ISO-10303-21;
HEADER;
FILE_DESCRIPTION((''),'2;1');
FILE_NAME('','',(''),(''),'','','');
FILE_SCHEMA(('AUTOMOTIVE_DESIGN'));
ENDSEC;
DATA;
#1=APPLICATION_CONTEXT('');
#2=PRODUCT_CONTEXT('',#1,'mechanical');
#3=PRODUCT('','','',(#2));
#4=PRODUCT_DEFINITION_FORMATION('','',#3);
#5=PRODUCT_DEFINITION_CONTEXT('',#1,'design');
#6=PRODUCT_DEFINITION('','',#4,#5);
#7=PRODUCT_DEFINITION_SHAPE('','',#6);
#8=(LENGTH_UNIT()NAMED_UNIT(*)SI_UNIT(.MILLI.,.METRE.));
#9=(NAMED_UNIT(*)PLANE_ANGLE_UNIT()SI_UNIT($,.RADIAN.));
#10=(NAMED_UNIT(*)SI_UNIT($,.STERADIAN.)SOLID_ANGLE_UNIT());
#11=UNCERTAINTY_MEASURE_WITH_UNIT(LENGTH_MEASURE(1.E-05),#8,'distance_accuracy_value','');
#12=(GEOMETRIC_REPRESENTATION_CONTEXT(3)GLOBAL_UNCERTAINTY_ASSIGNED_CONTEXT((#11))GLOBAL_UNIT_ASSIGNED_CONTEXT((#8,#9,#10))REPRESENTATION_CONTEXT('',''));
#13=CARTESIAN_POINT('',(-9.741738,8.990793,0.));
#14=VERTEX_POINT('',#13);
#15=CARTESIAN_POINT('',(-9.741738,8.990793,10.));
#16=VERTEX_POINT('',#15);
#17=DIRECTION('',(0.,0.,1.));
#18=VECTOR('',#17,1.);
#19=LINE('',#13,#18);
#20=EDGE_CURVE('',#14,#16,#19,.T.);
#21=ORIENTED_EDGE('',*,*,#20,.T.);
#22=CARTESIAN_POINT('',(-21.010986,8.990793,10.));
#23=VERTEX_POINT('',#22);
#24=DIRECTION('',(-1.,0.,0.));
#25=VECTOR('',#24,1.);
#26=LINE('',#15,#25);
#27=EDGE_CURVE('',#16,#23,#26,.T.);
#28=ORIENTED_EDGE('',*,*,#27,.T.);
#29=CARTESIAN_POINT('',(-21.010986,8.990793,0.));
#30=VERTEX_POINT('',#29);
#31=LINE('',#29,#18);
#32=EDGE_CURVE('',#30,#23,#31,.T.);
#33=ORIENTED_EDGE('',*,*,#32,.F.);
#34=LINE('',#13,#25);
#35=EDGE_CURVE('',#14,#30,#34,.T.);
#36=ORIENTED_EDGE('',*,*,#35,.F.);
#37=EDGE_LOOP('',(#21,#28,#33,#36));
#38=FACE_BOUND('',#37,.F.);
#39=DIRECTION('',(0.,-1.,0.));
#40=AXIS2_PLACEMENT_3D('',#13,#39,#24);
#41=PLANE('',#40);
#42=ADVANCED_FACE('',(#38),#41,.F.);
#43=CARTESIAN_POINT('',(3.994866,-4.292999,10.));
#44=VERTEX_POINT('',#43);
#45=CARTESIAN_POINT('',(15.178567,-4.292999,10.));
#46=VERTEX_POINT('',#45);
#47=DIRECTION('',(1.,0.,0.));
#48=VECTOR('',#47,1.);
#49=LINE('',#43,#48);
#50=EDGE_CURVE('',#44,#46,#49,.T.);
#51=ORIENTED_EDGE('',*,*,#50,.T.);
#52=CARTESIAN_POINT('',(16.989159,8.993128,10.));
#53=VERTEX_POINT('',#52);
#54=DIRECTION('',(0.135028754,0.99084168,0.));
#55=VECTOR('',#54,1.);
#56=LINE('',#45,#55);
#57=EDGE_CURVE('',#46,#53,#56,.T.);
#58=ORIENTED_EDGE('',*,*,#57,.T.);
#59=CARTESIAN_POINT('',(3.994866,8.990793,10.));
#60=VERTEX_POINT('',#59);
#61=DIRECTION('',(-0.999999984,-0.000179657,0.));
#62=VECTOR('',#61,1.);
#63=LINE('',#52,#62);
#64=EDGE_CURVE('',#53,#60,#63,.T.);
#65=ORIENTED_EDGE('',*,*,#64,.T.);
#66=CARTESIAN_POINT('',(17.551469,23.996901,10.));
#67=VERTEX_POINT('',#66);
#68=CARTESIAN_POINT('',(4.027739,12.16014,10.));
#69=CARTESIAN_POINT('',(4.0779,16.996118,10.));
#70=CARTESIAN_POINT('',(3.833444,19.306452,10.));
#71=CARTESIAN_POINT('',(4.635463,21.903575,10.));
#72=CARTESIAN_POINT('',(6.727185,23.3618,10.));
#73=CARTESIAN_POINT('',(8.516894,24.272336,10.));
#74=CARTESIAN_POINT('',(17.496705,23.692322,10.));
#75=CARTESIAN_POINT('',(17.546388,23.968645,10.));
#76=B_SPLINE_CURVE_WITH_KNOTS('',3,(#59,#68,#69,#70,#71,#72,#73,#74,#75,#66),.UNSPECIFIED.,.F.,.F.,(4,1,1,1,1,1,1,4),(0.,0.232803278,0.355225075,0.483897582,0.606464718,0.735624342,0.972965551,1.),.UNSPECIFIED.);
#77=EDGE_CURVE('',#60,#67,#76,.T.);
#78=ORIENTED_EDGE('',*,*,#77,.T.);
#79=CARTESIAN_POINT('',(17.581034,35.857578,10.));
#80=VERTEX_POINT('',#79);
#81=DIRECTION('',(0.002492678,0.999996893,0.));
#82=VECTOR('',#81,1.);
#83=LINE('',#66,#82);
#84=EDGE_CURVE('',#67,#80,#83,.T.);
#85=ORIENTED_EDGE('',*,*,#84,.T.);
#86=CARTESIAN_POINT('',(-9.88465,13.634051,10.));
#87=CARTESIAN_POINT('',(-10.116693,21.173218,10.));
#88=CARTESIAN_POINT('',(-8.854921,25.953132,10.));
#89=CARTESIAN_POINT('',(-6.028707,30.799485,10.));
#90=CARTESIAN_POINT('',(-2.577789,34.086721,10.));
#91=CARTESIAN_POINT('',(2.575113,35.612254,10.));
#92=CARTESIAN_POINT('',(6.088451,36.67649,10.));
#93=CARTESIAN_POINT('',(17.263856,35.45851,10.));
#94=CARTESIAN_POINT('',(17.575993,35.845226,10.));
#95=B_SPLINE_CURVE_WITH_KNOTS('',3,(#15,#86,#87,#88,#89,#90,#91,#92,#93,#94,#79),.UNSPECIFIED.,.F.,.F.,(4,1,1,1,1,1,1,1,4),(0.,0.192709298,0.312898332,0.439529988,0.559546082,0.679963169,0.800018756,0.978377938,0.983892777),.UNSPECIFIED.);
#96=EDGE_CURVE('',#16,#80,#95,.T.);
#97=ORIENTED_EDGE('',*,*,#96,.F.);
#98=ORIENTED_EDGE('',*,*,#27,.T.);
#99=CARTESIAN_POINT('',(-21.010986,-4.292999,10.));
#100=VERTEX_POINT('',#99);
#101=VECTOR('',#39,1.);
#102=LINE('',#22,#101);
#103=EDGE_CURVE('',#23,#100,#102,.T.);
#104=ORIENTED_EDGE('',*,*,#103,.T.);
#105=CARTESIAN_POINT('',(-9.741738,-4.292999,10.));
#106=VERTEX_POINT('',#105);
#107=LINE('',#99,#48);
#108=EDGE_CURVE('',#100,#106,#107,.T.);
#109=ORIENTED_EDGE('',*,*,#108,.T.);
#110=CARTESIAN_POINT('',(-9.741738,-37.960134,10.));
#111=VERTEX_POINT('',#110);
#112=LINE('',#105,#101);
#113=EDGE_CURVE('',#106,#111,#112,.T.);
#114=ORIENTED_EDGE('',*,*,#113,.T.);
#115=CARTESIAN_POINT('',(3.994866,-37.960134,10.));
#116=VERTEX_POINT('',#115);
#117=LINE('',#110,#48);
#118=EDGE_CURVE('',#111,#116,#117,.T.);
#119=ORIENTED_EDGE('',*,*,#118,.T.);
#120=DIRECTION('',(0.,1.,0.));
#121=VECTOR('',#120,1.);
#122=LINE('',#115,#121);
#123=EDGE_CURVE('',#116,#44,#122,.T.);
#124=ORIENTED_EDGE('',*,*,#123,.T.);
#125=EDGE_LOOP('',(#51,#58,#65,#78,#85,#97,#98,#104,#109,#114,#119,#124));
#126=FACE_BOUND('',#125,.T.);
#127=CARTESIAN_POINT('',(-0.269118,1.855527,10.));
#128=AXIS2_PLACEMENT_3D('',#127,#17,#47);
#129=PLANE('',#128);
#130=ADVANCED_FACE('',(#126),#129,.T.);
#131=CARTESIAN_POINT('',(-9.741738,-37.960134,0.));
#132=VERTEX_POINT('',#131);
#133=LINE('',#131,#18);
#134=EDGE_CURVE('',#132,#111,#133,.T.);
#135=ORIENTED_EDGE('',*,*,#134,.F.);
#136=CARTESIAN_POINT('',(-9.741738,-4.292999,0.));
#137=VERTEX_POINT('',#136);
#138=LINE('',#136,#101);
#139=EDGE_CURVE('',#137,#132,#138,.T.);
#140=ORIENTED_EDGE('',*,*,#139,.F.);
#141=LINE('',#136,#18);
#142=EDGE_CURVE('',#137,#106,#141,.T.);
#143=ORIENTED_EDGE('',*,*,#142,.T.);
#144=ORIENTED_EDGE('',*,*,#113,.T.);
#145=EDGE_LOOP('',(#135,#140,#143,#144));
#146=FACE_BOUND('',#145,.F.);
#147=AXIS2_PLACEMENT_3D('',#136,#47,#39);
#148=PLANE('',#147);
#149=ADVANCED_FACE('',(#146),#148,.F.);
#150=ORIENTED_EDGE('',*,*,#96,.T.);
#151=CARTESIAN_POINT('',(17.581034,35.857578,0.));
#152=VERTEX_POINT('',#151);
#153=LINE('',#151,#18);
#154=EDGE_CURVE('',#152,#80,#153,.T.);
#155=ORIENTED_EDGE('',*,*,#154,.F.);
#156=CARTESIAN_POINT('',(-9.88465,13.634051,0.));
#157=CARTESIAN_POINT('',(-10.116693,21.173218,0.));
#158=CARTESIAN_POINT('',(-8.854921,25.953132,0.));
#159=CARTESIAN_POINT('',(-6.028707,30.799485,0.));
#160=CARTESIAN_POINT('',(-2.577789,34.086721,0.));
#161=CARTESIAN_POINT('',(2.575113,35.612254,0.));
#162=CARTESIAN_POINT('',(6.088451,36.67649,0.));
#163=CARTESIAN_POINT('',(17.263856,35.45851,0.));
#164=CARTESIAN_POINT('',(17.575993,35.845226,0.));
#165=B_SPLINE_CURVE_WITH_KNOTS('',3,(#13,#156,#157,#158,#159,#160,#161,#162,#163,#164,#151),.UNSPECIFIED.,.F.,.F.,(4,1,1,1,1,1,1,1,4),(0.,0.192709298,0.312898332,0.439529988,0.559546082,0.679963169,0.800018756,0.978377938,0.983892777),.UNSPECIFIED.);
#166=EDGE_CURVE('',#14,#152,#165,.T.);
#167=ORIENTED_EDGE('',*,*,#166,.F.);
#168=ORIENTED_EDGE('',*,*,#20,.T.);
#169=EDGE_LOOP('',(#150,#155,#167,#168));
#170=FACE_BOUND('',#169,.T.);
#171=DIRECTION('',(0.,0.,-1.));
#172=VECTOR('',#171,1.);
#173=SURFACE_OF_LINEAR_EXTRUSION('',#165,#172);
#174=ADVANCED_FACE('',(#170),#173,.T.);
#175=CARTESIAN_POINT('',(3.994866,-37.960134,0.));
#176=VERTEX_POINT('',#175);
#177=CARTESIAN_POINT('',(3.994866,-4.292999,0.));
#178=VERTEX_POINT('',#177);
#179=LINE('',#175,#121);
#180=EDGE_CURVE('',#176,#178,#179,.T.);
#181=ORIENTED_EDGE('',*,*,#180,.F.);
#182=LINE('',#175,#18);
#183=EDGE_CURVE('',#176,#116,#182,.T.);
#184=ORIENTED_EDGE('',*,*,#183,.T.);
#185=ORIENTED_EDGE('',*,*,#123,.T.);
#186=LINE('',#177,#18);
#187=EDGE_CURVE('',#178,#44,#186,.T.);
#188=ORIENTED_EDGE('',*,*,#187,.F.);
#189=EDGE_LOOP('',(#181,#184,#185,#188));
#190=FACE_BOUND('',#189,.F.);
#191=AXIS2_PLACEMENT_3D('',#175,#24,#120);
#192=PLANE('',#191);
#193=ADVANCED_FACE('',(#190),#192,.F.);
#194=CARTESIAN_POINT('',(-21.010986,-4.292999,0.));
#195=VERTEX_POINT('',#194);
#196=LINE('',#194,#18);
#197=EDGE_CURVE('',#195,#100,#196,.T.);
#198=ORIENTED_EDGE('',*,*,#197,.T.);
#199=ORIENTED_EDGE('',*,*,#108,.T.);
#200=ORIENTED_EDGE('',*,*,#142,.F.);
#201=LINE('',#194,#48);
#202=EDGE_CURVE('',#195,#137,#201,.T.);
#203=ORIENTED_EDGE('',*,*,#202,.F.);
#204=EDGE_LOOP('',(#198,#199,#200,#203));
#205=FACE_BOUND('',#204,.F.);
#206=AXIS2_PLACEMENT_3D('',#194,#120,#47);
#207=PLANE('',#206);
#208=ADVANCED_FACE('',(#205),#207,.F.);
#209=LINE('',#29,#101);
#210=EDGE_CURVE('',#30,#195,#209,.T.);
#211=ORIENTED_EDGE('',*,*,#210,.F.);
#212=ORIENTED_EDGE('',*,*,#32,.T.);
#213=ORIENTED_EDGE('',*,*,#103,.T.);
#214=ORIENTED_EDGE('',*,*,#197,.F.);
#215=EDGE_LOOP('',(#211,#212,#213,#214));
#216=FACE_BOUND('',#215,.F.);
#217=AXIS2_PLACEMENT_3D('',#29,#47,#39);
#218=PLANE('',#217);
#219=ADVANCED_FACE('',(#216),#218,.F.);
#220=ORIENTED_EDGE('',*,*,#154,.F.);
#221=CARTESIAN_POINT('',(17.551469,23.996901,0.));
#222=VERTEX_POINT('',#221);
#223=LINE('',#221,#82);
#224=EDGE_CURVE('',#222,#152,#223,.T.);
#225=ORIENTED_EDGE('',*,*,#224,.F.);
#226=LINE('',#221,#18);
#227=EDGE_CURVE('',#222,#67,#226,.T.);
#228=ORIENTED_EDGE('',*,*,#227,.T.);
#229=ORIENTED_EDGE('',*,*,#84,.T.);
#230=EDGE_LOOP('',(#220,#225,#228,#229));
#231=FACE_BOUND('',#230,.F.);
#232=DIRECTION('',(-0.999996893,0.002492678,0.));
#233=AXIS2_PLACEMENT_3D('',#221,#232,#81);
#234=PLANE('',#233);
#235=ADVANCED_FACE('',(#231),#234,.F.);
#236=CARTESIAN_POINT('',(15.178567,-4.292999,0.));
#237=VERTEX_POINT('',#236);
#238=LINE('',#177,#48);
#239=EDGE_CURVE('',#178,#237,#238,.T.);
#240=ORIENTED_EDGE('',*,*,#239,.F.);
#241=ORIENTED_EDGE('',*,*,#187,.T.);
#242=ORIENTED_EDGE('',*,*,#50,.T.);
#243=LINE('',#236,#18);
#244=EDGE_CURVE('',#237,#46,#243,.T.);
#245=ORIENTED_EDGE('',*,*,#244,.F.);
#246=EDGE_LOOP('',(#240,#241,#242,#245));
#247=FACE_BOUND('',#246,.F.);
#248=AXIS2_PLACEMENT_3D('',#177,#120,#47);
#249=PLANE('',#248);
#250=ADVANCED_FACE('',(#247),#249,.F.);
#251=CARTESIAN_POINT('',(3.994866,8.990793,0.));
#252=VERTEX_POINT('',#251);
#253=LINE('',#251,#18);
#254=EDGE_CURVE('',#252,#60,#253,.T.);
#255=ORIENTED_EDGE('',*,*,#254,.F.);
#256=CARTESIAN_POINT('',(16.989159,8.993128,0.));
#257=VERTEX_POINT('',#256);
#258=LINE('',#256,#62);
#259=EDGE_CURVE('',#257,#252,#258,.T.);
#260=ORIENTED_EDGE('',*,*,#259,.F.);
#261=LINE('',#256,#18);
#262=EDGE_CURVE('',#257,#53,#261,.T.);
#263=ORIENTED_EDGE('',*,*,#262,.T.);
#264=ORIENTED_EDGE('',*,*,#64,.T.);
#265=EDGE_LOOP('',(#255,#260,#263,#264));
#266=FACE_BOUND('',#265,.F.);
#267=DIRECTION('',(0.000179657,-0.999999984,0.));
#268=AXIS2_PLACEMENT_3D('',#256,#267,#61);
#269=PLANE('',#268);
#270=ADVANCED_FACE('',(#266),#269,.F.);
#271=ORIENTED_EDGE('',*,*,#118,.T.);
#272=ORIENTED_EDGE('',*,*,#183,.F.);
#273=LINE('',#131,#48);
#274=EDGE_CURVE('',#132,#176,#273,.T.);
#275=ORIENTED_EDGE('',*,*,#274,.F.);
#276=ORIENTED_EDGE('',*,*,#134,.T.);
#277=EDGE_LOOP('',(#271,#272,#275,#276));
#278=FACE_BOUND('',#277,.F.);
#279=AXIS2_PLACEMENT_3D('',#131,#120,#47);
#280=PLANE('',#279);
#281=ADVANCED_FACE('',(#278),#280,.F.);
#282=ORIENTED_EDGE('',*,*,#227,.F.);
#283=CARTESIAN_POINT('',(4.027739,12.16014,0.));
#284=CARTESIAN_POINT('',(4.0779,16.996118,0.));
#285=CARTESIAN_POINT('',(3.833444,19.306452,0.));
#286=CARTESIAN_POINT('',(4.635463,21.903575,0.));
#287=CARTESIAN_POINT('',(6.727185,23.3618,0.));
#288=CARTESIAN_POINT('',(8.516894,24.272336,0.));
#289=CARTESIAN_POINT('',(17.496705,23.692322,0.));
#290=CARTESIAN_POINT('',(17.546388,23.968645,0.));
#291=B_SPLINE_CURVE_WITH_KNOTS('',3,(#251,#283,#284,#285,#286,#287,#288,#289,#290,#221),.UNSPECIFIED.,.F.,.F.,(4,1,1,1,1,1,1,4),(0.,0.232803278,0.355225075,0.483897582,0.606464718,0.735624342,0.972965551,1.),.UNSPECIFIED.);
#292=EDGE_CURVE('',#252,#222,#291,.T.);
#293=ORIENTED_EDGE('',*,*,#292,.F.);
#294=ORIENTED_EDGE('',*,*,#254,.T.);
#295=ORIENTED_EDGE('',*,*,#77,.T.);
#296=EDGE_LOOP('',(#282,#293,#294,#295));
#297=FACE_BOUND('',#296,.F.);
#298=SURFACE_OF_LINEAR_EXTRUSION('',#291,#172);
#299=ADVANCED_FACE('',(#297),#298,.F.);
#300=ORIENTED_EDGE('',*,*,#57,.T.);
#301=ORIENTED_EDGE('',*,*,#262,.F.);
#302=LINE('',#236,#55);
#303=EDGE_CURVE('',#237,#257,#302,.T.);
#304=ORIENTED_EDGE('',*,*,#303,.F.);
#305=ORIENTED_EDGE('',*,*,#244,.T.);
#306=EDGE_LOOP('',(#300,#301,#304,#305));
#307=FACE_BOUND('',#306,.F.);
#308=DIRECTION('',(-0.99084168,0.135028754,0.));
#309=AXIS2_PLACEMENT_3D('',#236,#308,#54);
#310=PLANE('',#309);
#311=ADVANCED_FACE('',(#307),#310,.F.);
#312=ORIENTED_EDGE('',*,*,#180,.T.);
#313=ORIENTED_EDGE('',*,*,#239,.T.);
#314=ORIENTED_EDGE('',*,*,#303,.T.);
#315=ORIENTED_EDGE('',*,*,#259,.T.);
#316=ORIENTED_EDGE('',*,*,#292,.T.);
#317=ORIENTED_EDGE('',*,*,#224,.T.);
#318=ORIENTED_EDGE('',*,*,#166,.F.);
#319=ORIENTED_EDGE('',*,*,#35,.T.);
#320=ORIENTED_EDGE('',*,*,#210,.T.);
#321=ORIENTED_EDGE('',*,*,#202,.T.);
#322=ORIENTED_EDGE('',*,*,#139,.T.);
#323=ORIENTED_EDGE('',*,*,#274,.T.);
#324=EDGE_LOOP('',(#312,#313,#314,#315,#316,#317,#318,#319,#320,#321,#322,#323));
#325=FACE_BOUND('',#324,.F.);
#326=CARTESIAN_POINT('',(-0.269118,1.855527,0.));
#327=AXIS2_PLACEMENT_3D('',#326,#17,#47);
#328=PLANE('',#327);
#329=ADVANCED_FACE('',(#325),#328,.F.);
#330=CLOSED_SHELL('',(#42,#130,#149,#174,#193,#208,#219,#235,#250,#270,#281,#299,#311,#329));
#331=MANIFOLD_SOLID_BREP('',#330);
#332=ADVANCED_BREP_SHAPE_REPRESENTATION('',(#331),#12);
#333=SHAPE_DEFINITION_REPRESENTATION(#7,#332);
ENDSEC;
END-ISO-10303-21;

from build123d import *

# Parameters (mm, degrees)
F1_DEPTH = 10


# Not quite as in the source:
# - a feature of the source that left no trace in its solid (it failed there, or was rolled back) is left out


with BuildPart() as f1:
    # F0 (on Top) → F1 (new body)
    with BuildSketch(Plane.XY):
        with BuildLine():
            Line((3.9948658086, -37.9601344466), (3.9948658086, -4.2929993942))
            Line((3.9948658086, -4.2929993942), (15.1785674321, -4.2929993942))
            Line((15.1785674321, -4.2929993942), (16.9891585852, 8.9931276855))
            Line((16.9891585852, 8.9931276855), (3.9948658086, 8.9907931754))
            add(Edge.make_bspline(
                [(3.9948658086, 8.9907931754), (4.027739325, 12.1601402389), (4.0778996896, 16.9961183151), (3.8334442726, 19.3064516597), (4.635462537, 21.9035751502), (6.7271846954, 23.3618004084), (8.5168941226, 24.2723359095), (17.4967051794, 23.6923218521), (17.5463882122, 23.9686446329), (17.5514686853, 23.9969007671)],
                knots=[0, 0, 0, 0, 0.232803278, 0.3552250751, 0.4838975823, 0.6064647181, 0.7356243424, 0.9729655512, 1, 1, 1, 1], degree=3))
            Line((17.5514686853, 23.9969007671), (17.5810336279, 35.8575776823))
            add(Edge.make_bspline(
                [(-9.7417384386, 8.9907931754), (-9.8846499396, 13.6340507262), (-10.1166925595, 21.1732175473), (-8.8549206442, 25.9531324701), (-6.028707478, 30.7994848228), (-2.5777889056, 34.0867208483), (2.5751128853, 35.6122541827), (6.0884512365, 36.6764900581), (17.2638557744, 35.458509778), (17.5759933146, 35.8452261681), (17.5810336279, 35.8575776823)],
                knots=[0, 0, 0, 0, 0.1927092977, 0.3128983322, 0.4395299884, 0.5595460824, 0.6799631693, 0.8000187556, 0.9783779377, 0.9838927772, 0.9838927772, 0.9838927772, 0.9838927772], degree=3))
            Line((-9.7417384386, 8.9907931754), (-21.010985598, 8.9907931754))
            Line((-21.010985598, 8.9907931754), (-21.010985598, -4.2929993942))
            Line((-21.010985598, -4.2929993942), (-9.7417384386, -4.2929993942))
            Line((-9.7417384386, -4.2929993942), (-9.7417384386, -37.9601344466))
            Line((-9.7417384386, -37.9601344466), (3.9948658086, -37.9601344466))
        make_face()
    extrude(amount=F1_DEPTH)


solid = f1.part
